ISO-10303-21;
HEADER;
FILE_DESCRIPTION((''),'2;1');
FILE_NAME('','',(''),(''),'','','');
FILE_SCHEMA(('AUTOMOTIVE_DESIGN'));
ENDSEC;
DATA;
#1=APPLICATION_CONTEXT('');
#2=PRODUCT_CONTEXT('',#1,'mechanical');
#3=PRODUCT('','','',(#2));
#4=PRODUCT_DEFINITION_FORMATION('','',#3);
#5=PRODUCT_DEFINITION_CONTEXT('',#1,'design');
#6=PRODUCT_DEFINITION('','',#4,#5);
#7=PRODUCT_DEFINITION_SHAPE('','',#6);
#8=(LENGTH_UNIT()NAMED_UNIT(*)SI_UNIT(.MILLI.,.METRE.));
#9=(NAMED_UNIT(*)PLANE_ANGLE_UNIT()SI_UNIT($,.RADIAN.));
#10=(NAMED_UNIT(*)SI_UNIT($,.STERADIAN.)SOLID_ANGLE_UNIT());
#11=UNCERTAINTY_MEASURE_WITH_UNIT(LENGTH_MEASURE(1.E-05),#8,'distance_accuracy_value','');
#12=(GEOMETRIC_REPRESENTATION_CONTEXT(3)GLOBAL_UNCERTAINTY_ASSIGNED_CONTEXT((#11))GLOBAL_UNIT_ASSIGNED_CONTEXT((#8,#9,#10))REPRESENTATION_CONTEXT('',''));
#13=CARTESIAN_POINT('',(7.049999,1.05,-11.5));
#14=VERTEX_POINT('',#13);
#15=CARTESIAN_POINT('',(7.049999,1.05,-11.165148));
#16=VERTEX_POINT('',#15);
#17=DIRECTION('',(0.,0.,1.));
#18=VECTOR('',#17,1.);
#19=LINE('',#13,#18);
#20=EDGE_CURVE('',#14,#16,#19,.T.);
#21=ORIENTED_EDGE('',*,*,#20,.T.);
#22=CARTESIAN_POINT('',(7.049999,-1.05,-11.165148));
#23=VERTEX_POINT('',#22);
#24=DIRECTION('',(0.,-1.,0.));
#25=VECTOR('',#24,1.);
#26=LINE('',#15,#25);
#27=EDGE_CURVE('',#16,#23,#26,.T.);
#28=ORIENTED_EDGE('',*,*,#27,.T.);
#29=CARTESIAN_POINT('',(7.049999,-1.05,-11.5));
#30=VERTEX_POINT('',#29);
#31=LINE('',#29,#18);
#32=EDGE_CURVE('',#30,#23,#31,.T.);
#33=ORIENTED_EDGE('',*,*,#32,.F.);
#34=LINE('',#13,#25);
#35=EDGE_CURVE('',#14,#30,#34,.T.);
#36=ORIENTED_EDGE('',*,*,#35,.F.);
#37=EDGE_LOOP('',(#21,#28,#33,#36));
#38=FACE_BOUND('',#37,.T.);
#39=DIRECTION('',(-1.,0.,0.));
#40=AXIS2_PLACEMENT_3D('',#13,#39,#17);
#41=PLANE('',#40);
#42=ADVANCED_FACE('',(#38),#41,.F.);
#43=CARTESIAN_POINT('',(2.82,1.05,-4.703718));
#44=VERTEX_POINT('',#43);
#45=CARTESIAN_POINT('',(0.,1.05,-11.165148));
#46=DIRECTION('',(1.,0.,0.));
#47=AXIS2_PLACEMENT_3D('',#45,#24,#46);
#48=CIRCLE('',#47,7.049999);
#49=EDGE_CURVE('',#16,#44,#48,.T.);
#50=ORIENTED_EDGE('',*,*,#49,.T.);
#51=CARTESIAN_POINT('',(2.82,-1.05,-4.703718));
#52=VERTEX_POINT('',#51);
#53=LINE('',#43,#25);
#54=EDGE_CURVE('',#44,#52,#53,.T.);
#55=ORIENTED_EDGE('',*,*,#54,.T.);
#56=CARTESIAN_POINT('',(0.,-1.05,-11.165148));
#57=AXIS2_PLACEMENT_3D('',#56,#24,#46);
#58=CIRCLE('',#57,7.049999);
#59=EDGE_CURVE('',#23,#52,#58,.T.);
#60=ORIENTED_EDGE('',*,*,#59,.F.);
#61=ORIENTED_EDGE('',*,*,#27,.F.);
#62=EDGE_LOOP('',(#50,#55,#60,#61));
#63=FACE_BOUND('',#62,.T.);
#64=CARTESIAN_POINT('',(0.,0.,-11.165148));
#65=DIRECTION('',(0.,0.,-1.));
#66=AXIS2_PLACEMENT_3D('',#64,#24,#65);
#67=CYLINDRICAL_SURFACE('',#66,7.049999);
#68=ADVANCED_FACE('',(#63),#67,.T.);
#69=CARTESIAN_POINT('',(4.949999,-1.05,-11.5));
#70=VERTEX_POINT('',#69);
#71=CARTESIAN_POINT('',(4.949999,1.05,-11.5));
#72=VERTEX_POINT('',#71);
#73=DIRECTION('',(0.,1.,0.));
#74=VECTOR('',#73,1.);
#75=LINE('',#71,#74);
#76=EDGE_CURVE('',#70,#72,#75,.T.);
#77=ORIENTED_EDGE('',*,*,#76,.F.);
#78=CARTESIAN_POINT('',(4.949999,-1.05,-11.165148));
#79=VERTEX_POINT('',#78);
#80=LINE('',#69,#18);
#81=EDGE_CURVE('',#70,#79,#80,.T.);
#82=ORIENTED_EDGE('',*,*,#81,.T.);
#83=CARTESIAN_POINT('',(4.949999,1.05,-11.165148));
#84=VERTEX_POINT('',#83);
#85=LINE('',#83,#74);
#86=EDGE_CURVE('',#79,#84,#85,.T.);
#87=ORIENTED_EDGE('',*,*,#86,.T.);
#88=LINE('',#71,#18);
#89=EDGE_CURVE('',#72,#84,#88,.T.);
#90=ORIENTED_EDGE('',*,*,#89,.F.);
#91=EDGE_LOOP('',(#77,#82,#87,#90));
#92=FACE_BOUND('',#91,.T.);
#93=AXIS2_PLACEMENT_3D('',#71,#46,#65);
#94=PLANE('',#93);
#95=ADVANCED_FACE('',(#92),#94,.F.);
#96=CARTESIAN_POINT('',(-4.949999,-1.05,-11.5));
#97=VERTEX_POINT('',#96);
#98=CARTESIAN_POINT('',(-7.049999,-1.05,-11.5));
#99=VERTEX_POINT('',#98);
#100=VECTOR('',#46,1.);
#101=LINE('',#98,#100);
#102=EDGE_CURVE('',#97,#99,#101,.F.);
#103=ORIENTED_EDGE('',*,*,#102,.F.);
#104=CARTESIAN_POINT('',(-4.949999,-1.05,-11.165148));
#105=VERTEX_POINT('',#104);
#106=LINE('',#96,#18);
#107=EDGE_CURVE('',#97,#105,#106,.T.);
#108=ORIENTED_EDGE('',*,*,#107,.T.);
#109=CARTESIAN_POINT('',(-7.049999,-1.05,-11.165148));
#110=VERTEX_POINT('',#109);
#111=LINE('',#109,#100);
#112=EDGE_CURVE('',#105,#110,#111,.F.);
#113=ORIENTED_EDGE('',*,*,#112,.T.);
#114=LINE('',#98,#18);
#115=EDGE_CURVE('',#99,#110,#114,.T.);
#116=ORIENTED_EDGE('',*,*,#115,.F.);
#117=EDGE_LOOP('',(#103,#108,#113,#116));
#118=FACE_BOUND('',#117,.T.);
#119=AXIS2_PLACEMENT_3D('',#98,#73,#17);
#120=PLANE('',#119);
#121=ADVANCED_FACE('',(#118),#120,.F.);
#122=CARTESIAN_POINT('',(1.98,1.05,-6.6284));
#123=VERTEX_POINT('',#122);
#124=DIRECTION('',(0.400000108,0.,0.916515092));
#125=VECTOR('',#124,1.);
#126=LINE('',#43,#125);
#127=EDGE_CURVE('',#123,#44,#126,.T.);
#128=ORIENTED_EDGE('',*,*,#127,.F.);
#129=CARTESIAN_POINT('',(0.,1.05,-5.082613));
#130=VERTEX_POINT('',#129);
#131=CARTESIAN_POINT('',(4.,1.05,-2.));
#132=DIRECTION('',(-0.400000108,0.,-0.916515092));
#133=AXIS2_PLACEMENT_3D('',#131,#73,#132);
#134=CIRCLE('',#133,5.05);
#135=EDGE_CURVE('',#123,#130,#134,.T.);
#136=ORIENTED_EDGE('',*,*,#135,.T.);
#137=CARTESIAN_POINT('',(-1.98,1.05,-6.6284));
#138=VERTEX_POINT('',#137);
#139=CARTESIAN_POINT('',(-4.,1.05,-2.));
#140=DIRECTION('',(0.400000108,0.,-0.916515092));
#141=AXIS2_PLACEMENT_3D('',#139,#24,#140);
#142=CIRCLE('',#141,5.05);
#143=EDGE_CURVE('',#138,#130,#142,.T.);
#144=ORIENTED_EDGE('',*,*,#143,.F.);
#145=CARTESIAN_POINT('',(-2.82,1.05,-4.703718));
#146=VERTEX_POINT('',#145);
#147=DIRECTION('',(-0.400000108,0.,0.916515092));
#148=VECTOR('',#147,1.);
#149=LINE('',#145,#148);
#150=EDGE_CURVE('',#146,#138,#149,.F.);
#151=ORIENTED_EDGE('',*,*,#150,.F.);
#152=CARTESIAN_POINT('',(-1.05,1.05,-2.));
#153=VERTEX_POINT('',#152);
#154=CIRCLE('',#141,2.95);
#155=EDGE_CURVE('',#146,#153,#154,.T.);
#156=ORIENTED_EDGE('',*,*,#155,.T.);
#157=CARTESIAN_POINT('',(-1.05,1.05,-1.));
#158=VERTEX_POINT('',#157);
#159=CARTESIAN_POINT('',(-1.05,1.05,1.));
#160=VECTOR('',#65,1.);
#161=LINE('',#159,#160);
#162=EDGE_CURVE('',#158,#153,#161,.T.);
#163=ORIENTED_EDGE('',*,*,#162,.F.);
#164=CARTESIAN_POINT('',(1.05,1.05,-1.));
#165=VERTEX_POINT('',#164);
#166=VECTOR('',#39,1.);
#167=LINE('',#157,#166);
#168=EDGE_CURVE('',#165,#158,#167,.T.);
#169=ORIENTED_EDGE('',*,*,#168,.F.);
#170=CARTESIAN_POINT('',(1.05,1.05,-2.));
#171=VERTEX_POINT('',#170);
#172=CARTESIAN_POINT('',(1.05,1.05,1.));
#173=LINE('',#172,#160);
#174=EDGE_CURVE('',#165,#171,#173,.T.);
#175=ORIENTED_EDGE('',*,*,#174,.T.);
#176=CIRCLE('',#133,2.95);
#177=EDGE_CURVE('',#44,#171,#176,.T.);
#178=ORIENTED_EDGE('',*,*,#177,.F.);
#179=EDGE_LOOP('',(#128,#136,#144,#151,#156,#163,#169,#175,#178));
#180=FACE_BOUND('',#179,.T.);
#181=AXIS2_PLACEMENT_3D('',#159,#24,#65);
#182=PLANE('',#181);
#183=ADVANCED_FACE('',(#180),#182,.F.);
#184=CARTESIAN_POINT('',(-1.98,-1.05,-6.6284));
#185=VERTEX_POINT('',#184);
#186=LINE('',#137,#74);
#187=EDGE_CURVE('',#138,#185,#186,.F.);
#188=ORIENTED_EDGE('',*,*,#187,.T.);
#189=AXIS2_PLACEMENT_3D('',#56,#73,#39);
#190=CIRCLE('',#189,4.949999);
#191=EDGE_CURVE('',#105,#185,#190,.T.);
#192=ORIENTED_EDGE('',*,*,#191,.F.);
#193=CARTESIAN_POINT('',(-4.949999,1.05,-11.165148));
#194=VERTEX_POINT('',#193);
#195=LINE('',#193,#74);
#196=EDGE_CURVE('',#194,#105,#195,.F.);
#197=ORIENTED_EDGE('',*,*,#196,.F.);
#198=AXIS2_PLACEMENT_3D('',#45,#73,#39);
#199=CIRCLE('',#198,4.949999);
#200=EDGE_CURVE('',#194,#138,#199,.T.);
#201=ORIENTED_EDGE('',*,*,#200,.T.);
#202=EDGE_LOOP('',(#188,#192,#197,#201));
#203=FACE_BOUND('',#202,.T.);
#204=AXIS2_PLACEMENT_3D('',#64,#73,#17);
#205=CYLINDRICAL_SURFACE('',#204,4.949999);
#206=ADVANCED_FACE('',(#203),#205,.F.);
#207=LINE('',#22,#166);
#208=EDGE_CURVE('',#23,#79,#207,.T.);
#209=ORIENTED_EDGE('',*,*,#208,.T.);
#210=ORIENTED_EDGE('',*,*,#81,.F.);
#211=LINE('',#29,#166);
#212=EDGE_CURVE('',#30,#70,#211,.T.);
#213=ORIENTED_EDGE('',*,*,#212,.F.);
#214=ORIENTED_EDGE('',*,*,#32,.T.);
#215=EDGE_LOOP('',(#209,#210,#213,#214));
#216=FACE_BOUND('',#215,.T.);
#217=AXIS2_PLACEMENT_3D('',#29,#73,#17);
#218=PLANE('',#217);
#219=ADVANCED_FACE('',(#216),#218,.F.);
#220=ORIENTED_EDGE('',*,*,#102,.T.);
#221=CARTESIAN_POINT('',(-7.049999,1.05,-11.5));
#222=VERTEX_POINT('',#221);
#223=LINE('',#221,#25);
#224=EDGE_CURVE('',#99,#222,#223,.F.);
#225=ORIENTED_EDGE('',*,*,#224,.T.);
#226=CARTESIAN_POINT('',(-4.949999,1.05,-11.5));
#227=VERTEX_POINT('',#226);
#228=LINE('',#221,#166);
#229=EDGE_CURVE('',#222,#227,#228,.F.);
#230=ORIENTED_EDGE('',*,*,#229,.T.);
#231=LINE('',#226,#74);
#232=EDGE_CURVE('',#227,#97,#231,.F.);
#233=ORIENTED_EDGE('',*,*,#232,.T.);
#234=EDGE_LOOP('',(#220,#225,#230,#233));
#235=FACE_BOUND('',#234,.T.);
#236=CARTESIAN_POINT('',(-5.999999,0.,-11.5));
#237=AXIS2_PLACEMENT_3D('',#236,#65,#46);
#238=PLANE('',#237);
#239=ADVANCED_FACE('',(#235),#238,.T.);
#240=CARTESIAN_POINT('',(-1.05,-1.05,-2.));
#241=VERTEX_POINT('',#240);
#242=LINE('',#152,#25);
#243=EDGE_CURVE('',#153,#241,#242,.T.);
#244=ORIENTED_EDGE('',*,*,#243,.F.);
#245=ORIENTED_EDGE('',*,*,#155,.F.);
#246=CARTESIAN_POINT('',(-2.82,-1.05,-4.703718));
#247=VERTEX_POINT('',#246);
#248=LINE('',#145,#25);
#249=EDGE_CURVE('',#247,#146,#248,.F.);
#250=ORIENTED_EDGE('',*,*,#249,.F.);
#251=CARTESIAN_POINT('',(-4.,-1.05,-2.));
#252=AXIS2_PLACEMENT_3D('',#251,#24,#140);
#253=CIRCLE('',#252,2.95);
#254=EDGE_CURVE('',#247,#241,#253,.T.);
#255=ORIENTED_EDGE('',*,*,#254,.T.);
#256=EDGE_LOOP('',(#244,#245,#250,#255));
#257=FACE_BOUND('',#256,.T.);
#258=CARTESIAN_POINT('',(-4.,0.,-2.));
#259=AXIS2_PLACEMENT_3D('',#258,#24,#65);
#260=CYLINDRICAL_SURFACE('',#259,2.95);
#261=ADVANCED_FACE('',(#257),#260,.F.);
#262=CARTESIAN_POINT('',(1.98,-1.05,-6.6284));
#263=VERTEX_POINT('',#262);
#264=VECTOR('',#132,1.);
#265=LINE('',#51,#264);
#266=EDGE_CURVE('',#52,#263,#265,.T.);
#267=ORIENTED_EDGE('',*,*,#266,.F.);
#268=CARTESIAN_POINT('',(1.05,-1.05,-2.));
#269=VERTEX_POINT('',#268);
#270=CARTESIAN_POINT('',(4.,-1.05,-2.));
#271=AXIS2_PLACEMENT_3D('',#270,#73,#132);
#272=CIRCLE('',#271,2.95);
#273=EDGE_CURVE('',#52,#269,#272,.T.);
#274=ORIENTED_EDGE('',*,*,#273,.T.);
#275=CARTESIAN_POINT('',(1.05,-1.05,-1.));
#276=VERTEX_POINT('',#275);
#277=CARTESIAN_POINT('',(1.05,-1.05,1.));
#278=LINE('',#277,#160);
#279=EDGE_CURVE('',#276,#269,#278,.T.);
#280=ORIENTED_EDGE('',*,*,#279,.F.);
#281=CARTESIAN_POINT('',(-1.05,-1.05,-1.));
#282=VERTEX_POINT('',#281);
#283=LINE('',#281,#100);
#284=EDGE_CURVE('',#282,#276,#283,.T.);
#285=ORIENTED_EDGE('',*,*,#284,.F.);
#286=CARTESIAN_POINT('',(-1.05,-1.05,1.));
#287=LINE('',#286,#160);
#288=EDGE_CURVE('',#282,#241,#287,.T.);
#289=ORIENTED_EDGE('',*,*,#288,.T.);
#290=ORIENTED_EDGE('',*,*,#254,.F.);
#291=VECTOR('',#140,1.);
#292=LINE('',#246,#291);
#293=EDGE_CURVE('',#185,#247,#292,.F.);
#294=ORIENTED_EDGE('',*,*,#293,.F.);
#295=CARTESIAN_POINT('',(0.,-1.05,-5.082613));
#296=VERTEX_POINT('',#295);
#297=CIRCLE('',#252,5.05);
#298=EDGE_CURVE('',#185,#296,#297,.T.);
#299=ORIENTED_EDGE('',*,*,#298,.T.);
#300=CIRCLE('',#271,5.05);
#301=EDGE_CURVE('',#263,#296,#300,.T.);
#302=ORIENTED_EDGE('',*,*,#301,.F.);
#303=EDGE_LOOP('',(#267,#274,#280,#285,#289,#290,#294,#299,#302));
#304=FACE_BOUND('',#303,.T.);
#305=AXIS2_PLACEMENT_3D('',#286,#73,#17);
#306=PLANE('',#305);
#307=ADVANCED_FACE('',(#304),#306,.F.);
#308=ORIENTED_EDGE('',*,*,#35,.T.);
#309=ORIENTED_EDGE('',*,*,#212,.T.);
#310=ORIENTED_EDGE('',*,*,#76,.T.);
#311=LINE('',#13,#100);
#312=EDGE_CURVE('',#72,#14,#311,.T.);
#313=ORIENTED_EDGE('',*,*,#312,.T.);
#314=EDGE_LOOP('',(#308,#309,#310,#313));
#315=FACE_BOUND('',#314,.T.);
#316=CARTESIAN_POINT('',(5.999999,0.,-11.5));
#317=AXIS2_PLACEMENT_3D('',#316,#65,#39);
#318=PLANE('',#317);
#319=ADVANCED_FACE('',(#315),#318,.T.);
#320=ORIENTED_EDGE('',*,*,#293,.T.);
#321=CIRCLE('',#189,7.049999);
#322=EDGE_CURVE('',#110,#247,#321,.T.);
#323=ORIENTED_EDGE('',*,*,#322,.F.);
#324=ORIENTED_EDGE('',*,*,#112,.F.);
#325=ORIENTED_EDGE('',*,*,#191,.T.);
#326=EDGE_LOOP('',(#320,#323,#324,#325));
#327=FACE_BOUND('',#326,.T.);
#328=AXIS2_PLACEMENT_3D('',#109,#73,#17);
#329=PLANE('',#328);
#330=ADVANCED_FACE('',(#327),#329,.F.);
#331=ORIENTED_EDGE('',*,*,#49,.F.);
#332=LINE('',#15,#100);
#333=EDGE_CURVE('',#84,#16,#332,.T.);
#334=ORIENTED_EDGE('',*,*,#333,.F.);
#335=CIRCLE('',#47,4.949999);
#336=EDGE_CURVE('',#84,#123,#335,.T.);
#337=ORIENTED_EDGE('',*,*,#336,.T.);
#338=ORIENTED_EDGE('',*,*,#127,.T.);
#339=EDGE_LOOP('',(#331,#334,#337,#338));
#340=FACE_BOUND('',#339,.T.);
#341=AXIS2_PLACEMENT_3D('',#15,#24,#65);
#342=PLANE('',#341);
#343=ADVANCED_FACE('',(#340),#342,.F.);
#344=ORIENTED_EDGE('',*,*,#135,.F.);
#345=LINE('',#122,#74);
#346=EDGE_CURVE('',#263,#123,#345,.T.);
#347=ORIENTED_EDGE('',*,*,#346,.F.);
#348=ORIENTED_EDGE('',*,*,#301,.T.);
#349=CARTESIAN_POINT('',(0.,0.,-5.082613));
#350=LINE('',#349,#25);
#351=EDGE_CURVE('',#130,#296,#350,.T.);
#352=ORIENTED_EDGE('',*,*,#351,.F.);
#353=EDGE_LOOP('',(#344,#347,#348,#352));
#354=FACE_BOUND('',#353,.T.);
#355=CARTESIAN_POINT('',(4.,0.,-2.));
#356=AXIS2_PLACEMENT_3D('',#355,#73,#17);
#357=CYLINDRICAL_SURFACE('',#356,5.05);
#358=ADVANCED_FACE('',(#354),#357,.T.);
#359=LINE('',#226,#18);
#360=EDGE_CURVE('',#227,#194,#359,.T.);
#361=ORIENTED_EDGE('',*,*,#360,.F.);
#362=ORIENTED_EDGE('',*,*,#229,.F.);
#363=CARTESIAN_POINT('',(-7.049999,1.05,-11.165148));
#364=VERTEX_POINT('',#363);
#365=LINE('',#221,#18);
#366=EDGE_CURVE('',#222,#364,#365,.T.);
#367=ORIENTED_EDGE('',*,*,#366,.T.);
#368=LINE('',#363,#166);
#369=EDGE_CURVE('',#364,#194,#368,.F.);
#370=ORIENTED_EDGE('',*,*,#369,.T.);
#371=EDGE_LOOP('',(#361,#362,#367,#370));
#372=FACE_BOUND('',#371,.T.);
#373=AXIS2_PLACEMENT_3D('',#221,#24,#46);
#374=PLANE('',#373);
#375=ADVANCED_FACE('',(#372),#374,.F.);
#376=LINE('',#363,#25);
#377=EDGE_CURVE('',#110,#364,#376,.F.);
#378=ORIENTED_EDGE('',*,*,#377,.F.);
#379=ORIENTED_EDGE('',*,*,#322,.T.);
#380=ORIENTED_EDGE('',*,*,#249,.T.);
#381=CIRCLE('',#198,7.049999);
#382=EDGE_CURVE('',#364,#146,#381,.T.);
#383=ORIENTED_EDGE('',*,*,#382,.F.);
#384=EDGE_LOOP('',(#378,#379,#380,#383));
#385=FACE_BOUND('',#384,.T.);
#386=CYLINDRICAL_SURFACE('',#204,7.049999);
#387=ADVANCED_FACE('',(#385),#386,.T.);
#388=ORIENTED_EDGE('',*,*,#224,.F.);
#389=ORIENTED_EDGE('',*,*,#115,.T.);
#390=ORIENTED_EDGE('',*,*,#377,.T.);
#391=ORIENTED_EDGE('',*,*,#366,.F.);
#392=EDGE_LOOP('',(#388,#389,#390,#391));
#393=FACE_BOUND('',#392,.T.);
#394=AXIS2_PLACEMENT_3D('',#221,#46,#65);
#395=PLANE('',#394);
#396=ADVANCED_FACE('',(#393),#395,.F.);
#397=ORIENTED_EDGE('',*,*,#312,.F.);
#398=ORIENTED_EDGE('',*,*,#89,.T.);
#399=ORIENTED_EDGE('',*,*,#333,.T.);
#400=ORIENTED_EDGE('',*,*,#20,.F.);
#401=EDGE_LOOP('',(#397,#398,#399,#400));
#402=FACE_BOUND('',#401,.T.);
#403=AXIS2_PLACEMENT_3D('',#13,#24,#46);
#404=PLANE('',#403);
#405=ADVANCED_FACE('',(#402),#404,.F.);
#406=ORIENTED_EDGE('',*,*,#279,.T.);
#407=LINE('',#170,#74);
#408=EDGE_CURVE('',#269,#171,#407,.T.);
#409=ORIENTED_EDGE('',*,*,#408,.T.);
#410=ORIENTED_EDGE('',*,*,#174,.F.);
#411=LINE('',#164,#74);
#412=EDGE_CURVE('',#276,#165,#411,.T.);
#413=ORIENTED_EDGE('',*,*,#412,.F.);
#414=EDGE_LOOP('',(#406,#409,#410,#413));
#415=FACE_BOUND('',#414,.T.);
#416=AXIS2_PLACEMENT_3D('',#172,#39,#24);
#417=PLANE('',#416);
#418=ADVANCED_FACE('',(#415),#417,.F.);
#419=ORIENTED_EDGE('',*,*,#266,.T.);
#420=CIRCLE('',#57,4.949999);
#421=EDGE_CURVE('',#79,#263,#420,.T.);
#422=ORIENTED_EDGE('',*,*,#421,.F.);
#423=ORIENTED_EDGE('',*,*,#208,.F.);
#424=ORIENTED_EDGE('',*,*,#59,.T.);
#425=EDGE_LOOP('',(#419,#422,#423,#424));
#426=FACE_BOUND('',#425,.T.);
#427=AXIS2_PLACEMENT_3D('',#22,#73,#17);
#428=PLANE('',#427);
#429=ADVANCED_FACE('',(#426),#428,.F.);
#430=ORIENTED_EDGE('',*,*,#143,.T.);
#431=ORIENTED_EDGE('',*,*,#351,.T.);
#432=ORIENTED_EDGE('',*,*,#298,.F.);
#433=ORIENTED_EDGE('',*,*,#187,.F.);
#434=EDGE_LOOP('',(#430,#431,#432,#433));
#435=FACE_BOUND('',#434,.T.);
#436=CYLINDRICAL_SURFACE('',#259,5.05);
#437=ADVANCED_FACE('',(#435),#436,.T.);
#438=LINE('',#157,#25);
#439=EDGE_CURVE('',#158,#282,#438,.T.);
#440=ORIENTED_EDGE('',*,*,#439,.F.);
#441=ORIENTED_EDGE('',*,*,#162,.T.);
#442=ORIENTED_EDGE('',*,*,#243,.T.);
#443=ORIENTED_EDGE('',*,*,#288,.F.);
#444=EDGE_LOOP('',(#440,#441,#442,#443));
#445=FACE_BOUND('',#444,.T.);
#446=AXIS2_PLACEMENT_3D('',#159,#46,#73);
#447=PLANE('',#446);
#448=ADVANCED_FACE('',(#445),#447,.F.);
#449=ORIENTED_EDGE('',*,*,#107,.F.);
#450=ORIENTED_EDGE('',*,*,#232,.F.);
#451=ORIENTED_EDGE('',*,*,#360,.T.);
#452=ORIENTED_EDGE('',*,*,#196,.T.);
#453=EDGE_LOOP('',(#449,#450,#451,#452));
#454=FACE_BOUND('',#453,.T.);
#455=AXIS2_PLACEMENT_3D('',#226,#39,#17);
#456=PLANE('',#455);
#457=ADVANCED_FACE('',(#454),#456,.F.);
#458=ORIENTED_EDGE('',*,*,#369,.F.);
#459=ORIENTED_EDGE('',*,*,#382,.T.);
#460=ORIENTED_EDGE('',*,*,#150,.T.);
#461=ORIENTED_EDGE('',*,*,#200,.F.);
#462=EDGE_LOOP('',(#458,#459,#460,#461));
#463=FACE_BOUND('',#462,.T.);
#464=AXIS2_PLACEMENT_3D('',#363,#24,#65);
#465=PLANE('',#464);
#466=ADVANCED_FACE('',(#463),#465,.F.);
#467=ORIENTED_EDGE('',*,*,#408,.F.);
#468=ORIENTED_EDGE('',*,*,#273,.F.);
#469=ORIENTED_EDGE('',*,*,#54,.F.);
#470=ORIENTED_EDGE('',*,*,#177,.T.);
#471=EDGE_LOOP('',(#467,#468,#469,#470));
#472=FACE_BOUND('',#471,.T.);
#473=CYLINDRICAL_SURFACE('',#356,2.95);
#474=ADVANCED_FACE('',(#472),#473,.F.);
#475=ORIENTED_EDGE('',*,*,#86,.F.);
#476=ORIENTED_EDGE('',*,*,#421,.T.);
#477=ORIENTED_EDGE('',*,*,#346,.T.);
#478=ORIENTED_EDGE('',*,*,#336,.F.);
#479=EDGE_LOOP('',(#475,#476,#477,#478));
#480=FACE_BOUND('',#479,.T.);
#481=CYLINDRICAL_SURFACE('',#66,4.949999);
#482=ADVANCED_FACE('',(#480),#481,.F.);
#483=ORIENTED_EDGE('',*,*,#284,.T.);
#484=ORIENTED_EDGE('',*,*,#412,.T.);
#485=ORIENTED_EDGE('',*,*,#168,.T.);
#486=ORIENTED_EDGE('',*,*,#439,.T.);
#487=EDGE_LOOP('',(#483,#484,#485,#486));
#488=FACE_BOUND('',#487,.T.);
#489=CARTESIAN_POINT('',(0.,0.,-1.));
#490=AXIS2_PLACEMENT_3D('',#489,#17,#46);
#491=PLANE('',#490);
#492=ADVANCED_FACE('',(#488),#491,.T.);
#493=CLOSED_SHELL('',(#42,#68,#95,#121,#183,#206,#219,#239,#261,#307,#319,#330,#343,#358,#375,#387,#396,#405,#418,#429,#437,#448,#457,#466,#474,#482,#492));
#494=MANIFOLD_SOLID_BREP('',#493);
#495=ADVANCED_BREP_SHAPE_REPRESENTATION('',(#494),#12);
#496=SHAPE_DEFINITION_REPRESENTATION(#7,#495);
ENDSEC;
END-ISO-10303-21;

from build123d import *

# Parameters (mm, degrees)
SKETCH1_W           = 2.1
SKETCH1_H           = 2.1
BOSS_EXTRUDE1_DEPTH = 1
SKETCH4_W           = 2.1
SKETCH4_H           = 2.1
BOSS_EXTRUDE3_DEPTH = 2
SWEEP4_START        = -1.05
SWEEP4_DEPTH        = 2.1
SKETCH7_W           = 2.1
SKETCH7_H           = 2.1
CUT_EXTRUDE1_DEPTH  = 2


# Read off the part's stored shape, not the designer's step: Sweep4
with BuildPart() as part:
    # Sketch1 → Boss-Extrude1 (new body)
    with BuildSketch(Plane.XY):
        Rectangle(SKETCH1_W, SKETCH1_H)
    extrude(amount=BOSS_EXTRUDE1_DEPTH)

    # Sketch4 → Boss-Extrude3 (add)
    with BuildSketch(Plane.XY):
        Rectangle(SKETCH4_W, SKETCH4_H)
    extrude(amount=-BOSS_EXTRUDE3_DEPTH)

    # Sweep4 outline → Sweep4 (add)
    with BuildSketch(Plane(origin=(0, 0, 0), x_dir=(1, 0, 0), z_dir=(0, 1, 0)).offset(SWEEP4_START)):
        with BuildLine():
            Line((7.04999865, 11.165148445), (7.04999919, 11.5))
            Line((7.04999919, 11.5), (4.94999919, 11.5))
            Line((4.94999919, 11.5), (4.94999865, 11.165148445))
            ThreePointArc((4.94999865, 11.165148445), (4.141466162, 8.453922768), (1.979999995, 6.628399977))
            ThreePointArc((1.979999995, 6.628399977), (-0.225133297, 4.765998667), (-1.05, 2))
            Line((-1.05, 2), (1.05, 2))
            ThreePointArc((1.05, 2), (1.531852827, 3.615781399), (2.819999682, 4.703719521))
            ThreePointArc((2.819999682, 4.703719521), (5.898452285, 7.303705501), (7.04999865, 11.165148445))
        make_face()
    sweep4 = extrude(amount=SWEEP4_DEPTH)

    # Mirror1: Sweep4 across plane
    add(sweep4.mirror(Plane(origin=(0, 0, 0), x_dir=(0, 0, 1), z_dir=(1, 0, 0))))

    # Sketch7 → Cut-Extrude1 (cut)
    with BuildSketch(Plane.XY.offset(1)):
        Rectangle(SKETCH7_W, SKETCH7_H)
    extrude(amount=-CUT_EXTRUDE1_DEPTH, mode=Mode.SUBTRACT)


solid = part.part
